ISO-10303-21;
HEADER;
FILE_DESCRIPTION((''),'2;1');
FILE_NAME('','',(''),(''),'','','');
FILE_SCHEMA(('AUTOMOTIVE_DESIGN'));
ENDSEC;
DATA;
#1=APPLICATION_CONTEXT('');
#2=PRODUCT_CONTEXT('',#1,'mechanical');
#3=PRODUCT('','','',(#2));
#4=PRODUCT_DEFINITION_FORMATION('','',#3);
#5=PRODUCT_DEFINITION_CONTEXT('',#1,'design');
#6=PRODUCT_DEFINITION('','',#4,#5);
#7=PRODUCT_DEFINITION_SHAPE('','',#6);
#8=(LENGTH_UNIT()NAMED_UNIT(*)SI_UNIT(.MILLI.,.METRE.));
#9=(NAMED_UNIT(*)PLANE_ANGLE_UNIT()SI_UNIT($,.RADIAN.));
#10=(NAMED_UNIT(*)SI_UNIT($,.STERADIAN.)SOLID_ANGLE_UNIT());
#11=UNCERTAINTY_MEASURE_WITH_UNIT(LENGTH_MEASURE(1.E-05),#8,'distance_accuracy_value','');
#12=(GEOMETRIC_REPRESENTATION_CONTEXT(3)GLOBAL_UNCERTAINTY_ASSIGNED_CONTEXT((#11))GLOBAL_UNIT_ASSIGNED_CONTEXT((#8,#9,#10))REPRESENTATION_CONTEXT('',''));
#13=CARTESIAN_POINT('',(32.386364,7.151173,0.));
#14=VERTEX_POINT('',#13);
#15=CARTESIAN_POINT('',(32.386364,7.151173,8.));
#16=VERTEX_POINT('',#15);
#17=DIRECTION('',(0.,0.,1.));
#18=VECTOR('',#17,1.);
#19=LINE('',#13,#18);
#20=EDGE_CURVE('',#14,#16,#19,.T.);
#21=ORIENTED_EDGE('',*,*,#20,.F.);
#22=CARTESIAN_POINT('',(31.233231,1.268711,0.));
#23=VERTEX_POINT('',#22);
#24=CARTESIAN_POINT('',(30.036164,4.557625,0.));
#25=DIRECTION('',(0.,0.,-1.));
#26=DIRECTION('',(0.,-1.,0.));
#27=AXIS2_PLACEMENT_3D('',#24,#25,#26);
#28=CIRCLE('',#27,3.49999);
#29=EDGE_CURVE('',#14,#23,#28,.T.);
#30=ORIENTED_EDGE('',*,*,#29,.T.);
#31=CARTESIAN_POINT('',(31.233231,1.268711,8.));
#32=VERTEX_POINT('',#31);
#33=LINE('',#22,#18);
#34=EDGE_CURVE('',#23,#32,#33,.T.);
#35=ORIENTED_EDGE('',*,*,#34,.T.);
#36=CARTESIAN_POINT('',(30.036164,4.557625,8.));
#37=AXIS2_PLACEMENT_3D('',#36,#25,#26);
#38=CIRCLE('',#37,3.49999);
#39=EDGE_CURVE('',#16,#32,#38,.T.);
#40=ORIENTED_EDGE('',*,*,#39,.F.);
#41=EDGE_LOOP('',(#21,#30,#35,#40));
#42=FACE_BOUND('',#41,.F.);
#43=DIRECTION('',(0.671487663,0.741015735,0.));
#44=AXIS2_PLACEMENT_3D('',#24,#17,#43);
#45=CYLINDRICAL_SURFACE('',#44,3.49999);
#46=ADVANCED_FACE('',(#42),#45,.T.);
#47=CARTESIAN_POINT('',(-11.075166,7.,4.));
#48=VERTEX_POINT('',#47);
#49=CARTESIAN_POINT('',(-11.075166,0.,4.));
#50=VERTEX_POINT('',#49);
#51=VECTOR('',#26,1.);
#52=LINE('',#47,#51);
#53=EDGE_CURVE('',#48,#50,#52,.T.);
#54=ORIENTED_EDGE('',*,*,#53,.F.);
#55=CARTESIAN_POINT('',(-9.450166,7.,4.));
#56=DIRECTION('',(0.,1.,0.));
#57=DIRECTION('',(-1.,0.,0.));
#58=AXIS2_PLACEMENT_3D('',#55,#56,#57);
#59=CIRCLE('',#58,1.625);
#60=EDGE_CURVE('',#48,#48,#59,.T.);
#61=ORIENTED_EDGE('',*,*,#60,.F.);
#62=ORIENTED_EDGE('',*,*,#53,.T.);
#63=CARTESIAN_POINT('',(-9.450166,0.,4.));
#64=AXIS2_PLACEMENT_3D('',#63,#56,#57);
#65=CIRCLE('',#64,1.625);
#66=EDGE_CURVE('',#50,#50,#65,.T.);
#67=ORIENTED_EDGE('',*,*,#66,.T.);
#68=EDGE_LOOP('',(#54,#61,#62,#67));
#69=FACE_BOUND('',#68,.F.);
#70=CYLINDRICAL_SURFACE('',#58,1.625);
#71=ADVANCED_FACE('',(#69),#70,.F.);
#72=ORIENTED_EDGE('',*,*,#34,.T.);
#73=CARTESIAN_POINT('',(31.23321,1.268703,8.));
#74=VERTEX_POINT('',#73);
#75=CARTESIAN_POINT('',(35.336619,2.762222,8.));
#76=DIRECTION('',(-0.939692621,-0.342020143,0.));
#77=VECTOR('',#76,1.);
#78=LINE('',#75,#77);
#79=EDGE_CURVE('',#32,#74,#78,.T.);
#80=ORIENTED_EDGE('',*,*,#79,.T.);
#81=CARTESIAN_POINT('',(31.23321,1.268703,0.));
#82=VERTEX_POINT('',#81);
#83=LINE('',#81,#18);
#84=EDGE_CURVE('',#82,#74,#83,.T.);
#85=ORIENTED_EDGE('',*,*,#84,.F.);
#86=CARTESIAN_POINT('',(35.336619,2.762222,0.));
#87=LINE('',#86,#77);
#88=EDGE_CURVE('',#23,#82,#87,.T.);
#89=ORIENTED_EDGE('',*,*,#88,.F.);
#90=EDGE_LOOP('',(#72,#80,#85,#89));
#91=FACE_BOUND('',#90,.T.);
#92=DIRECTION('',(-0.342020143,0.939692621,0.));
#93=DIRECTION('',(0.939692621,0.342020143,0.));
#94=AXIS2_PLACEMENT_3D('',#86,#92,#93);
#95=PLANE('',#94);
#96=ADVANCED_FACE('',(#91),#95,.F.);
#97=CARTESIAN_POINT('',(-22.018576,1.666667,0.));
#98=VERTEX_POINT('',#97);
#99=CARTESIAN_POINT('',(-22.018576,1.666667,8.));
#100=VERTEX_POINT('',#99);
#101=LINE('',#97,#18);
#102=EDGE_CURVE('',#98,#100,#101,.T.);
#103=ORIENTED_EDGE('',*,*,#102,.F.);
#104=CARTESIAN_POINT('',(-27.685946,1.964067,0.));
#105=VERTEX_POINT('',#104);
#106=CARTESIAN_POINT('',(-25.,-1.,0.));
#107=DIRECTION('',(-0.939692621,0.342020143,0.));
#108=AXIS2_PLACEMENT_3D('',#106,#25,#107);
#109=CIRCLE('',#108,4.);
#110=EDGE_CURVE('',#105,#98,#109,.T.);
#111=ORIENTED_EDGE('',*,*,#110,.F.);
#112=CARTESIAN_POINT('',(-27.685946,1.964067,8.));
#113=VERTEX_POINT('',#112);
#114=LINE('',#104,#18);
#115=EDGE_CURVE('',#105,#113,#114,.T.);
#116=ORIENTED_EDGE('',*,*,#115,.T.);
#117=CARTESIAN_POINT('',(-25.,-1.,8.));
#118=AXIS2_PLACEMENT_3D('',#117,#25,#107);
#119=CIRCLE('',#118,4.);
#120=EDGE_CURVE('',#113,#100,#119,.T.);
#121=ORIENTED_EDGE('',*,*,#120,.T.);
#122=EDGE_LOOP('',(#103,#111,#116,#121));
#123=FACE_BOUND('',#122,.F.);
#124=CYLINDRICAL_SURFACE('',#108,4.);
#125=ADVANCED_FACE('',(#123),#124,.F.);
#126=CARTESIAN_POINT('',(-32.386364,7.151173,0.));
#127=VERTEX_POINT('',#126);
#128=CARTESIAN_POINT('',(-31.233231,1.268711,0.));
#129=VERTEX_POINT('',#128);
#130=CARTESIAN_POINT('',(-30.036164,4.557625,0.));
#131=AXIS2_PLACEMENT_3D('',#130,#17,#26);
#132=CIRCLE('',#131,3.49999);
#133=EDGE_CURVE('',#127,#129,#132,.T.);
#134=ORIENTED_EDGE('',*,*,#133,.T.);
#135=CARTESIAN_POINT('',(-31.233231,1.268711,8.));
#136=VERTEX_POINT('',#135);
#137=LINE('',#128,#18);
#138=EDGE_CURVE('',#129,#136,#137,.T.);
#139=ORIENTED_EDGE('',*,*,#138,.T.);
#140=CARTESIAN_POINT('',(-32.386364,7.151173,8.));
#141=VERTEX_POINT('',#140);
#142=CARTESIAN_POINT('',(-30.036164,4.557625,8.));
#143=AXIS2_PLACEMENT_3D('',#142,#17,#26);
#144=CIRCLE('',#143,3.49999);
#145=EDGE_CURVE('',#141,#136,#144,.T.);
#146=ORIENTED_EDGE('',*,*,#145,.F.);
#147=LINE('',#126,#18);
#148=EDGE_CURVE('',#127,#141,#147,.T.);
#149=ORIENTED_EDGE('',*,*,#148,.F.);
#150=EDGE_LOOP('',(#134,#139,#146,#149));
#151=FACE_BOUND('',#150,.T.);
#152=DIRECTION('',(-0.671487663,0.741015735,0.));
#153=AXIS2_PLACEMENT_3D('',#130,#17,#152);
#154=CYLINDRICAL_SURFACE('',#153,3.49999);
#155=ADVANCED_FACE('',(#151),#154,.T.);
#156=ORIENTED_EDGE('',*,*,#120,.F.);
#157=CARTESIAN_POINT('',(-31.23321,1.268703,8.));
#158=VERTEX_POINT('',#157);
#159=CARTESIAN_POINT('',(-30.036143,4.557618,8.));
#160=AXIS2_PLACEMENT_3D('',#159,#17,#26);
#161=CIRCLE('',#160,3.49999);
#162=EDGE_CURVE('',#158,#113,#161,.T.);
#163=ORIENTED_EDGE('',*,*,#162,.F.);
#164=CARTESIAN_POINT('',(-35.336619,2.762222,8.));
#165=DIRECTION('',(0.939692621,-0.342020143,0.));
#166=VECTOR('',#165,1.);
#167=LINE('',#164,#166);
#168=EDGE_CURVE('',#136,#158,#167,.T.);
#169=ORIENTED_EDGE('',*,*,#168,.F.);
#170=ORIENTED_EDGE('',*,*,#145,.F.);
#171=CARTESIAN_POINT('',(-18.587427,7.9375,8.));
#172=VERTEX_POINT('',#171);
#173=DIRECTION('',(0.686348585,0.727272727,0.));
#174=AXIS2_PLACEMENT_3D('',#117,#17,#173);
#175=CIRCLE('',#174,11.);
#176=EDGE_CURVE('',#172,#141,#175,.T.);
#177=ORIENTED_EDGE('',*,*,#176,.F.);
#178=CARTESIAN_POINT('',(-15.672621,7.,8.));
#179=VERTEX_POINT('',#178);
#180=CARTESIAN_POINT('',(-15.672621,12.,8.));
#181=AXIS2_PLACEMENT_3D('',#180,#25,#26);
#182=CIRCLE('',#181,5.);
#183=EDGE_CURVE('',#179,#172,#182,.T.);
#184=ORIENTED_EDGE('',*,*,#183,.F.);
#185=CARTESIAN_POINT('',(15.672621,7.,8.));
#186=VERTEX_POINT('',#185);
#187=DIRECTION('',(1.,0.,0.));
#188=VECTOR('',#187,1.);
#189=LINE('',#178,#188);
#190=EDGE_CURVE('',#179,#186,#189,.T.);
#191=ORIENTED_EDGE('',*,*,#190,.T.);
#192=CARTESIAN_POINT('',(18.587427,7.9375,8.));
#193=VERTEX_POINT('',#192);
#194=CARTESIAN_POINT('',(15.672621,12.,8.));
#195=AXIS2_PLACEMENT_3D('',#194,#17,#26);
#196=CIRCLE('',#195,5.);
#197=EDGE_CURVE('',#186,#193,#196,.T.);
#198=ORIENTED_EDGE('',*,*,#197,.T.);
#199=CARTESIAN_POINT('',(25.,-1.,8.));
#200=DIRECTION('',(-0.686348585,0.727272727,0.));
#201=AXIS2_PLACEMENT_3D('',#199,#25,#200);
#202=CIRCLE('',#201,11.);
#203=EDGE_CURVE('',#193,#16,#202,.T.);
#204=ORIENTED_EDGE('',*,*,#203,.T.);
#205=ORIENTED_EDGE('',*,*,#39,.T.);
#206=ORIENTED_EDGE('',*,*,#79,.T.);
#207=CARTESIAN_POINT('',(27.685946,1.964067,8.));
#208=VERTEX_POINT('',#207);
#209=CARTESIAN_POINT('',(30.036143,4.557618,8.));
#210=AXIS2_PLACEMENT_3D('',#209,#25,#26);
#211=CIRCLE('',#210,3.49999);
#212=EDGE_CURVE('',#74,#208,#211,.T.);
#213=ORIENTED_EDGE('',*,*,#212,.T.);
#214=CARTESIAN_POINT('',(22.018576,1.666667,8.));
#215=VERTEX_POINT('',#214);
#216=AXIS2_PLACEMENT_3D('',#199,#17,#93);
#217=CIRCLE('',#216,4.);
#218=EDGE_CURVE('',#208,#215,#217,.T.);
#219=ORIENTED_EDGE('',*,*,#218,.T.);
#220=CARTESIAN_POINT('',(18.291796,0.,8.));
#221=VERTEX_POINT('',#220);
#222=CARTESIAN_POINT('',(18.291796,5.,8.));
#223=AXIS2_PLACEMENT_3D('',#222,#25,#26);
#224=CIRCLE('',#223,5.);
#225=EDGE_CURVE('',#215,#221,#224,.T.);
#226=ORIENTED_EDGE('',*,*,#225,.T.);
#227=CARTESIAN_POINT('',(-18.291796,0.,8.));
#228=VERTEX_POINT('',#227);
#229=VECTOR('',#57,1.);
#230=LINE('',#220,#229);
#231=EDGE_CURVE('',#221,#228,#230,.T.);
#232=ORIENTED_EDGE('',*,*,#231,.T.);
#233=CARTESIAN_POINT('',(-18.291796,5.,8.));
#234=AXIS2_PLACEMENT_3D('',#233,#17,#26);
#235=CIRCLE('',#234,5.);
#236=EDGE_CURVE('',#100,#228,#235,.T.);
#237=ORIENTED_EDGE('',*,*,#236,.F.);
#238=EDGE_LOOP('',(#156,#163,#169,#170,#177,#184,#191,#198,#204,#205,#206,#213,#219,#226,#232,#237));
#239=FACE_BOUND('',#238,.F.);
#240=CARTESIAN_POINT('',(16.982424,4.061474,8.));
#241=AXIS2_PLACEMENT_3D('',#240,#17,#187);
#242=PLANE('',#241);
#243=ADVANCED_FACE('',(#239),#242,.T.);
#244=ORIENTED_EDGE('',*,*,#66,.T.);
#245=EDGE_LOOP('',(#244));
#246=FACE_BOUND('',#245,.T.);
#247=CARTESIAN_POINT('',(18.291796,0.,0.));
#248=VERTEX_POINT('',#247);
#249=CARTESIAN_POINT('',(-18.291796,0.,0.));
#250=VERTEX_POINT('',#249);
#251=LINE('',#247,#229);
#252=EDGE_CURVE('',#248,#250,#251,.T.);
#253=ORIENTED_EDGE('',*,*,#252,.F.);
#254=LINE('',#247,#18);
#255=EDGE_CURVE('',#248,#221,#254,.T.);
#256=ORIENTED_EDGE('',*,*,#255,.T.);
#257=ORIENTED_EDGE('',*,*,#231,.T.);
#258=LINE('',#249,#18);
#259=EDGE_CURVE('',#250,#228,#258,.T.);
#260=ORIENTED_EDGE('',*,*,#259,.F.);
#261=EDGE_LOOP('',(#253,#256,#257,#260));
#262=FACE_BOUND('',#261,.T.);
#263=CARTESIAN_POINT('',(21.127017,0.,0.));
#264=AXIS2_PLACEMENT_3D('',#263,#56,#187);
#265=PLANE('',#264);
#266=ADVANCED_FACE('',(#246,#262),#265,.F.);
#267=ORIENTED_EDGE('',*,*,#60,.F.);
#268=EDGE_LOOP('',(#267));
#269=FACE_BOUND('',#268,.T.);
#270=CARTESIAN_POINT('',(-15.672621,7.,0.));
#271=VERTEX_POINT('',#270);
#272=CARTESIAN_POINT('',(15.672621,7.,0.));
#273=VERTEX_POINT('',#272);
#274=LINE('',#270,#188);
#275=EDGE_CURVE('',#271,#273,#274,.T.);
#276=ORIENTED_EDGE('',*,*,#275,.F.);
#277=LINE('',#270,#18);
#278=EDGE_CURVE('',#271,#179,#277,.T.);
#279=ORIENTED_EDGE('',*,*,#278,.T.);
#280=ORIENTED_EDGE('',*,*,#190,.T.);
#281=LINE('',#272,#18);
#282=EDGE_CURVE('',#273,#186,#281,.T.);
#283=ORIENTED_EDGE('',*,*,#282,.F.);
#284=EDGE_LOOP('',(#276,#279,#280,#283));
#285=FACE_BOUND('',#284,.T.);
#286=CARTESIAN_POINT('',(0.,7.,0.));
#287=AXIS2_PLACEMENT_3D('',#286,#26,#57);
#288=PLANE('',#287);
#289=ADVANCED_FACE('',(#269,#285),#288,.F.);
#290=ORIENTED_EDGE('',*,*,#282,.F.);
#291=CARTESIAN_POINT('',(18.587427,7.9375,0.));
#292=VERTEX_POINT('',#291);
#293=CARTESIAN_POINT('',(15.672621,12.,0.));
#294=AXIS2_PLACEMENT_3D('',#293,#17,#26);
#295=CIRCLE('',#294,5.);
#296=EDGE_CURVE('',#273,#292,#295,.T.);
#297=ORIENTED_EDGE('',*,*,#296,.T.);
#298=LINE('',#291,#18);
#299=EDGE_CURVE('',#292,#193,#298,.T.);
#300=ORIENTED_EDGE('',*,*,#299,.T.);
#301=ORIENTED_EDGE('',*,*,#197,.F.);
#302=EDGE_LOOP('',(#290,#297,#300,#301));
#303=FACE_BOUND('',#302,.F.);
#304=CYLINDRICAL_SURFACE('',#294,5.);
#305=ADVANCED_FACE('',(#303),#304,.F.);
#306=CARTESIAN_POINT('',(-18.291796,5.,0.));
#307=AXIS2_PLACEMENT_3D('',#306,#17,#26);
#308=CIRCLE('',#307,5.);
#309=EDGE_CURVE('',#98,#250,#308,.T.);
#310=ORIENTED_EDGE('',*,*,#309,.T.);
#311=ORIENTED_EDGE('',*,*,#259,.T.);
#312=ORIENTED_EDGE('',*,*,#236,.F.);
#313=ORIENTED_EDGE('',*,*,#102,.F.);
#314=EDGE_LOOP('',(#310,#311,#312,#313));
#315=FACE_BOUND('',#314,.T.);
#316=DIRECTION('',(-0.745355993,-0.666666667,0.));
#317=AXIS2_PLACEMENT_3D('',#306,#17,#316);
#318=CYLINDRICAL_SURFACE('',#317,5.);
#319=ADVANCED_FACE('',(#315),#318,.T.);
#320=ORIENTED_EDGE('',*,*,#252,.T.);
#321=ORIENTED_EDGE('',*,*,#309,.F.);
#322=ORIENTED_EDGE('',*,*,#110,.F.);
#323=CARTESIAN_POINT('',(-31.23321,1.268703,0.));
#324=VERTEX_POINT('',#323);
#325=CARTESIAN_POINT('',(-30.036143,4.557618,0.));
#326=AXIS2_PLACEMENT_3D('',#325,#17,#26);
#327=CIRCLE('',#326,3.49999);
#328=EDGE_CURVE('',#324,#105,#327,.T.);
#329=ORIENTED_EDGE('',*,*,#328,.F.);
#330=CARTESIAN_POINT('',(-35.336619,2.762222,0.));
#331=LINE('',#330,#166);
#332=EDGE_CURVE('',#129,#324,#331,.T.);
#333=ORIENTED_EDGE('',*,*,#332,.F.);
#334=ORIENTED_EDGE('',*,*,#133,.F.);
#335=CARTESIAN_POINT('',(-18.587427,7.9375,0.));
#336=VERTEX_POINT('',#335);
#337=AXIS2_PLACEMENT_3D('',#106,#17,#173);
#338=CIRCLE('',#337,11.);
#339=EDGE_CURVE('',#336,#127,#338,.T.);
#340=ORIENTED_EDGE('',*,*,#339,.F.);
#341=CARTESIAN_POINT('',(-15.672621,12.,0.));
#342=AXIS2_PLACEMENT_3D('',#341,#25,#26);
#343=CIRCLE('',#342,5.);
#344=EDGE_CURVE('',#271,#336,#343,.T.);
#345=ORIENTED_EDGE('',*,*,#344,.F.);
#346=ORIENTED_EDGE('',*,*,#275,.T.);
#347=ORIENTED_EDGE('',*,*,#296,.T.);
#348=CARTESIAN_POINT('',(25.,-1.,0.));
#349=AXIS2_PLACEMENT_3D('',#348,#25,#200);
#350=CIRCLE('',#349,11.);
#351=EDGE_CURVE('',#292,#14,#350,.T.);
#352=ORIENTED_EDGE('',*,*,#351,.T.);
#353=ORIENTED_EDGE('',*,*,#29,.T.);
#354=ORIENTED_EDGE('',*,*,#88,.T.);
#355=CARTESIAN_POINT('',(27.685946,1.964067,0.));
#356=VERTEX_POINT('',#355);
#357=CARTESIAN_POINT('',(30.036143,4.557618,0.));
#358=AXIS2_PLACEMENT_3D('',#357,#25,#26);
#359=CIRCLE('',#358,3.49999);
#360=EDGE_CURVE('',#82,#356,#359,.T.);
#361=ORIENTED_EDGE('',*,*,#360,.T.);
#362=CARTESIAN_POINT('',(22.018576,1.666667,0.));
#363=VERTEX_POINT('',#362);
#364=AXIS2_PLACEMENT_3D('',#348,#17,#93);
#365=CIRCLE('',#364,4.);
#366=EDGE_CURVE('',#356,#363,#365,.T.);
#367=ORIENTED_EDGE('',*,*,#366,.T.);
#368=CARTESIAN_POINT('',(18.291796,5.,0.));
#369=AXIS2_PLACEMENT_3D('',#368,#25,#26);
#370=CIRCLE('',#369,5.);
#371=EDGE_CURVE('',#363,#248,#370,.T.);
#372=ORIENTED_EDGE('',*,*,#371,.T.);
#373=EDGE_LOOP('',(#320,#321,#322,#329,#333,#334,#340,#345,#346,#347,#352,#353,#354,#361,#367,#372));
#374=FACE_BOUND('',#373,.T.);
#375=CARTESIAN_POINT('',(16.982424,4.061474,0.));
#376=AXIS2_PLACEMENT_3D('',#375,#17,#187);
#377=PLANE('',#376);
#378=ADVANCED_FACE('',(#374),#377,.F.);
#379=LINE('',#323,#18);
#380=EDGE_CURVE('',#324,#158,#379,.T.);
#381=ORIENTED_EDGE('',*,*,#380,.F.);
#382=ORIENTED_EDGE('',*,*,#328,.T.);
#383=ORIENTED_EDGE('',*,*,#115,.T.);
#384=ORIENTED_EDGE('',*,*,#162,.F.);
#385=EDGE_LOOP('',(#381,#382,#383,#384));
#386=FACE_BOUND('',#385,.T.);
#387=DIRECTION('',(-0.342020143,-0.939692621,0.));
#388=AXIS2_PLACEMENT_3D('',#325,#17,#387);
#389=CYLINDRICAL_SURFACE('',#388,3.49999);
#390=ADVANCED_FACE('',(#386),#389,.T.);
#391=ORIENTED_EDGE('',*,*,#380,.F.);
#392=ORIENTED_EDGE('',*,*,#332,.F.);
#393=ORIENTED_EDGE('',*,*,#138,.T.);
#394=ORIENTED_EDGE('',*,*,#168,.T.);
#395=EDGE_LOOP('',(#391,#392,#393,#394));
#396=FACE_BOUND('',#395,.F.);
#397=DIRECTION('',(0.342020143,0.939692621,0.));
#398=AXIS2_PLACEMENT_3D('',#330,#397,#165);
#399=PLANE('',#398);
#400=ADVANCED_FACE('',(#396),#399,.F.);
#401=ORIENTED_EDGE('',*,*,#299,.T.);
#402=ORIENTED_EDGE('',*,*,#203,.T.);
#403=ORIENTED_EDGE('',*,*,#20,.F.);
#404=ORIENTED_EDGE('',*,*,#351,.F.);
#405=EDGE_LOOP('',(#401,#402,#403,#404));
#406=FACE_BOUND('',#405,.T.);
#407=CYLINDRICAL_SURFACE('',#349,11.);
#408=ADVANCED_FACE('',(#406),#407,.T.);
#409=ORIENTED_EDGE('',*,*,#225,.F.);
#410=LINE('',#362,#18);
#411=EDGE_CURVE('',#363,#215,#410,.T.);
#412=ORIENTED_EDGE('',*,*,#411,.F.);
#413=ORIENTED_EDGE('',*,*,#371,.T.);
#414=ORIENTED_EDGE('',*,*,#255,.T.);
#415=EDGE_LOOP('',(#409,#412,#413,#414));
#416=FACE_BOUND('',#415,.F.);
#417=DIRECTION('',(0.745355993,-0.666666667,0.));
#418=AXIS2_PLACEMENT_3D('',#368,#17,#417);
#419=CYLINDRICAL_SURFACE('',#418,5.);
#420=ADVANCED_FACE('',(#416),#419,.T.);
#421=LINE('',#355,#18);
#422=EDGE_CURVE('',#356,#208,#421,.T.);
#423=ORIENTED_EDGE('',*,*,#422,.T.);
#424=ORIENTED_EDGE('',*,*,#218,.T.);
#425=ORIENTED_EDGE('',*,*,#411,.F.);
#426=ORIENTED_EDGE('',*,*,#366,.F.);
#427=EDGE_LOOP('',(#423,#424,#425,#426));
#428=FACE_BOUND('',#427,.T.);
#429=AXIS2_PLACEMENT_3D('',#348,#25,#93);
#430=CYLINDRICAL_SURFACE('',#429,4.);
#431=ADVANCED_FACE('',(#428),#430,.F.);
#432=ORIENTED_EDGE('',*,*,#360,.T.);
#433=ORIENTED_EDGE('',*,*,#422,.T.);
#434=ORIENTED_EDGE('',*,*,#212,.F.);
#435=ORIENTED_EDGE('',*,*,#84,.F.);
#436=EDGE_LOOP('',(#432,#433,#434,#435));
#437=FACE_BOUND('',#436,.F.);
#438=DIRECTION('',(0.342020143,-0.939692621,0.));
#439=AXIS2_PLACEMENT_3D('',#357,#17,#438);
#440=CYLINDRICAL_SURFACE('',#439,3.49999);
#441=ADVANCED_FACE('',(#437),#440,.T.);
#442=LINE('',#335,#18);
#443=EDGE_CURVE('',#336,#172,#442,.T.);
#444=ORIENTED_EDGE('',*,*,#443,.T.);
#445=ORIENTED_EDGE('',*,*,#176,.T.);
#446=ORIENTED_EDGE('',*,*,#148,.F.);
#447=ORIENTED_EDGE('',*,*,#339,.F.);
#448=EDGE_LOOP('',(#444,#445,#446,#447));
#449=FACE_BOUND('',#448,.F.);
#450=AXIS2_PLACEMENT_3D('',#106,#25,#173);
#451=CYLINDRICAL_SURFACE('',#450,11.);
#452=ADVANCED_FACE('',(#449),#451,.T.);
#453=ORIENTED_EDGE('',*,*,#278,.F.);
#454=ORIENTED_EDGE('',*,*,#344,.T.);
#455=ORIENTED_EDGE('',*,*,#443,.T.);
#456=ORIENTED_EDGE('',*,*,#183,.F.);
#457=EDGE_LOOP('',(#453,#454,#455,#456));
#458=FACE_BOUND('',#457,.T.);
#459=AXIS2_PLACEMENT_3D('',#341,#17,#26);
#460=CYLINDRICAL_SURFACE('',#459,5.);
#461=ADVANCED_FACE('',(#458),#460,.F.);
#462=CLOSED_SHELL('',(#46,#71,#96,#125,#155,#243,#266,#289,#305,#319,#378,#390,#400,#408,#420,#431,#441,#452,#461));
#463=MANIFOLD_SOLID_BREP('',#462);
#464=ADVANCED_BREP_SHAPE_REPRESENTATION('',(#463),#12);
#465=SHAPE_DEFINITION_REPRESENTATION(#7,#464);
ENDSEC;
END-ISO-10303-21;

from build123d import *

# Parameters (mm, degrees)
F2_DEPTH = 8
F4_R     = 5
F5_R     = 3.49999
F3_R     = 1.625
F8_DEPTH = 7.001


# Not quite as in the source:
# - a fillet or chamfer is up to 0.001 mm smaller than in the source, because OpenCascade refuses the exact size


with BuildPart() as f2:
    # F1 (on Top) → F2 (new body)
    with BuildSketch(Plane.XY):
        with BuildLine():
            Line((0, 7), (-17.4501655647, 7))
            ThreePointArc((-17.4501655647, 7), (-27.535987639, 9.7036800538), (-35.3366188286, 2.7622215766))
            Line((-35.3366188286, 2.7622215766), (-28.7587704831, 0.3680805733))
            ThreePointArc((-28.7587704831, 0.3680805733), (-24.8073034208, 2.9953558075), (-21.1270166538, 0))
            Line((-21.1270166538, 0), (0, 0))
            Line((0, 0), (0, 7))
        make_face()
    extrude(amount=F2_DEPTH)

    # F4
    f4_edges = [f2.edges().sort_by_distance(p)[0] for p in [
        (-17.450166, 7, 4),
        (-21.127017, 0, 4),
    ]]
    fillet(f4_edges, radius=F4_R)

    # F5 (radius 3.5 in the source; OpenCascade refuses exactly that, so slightly less here)
    f5_edges = [f2.edges().sort_by_distance(p)[0] for p in [
        (-35.336619, 2.762222, 4),
        (-28.75877, 0.368081, 4),
    ]]
    fillet(f5_edges, radius=F5_R)

    # F7: F2 across face


with BuildPart() as f2_1:
    add(f2.part)
    add(f2.part.mirror(Plane(origin=(0, 3.5, 4), x_dir=(0, 1, 0), z_dir=(1, 0, 0))))

    # F3 (on face) → F8 (cut, through all)
    with BuildSketch(Plane(origin=(0, 7, 0), x_dir=(-1, 0, 0), z_dir=(0, 1, 0))):
        with Locations((9.4501655647, 4)):
            Circle(F3_R)
    extrude(amount=-F8_DEPTH, mode=Mode.SUBTRACT)


solid = f2_1.part
